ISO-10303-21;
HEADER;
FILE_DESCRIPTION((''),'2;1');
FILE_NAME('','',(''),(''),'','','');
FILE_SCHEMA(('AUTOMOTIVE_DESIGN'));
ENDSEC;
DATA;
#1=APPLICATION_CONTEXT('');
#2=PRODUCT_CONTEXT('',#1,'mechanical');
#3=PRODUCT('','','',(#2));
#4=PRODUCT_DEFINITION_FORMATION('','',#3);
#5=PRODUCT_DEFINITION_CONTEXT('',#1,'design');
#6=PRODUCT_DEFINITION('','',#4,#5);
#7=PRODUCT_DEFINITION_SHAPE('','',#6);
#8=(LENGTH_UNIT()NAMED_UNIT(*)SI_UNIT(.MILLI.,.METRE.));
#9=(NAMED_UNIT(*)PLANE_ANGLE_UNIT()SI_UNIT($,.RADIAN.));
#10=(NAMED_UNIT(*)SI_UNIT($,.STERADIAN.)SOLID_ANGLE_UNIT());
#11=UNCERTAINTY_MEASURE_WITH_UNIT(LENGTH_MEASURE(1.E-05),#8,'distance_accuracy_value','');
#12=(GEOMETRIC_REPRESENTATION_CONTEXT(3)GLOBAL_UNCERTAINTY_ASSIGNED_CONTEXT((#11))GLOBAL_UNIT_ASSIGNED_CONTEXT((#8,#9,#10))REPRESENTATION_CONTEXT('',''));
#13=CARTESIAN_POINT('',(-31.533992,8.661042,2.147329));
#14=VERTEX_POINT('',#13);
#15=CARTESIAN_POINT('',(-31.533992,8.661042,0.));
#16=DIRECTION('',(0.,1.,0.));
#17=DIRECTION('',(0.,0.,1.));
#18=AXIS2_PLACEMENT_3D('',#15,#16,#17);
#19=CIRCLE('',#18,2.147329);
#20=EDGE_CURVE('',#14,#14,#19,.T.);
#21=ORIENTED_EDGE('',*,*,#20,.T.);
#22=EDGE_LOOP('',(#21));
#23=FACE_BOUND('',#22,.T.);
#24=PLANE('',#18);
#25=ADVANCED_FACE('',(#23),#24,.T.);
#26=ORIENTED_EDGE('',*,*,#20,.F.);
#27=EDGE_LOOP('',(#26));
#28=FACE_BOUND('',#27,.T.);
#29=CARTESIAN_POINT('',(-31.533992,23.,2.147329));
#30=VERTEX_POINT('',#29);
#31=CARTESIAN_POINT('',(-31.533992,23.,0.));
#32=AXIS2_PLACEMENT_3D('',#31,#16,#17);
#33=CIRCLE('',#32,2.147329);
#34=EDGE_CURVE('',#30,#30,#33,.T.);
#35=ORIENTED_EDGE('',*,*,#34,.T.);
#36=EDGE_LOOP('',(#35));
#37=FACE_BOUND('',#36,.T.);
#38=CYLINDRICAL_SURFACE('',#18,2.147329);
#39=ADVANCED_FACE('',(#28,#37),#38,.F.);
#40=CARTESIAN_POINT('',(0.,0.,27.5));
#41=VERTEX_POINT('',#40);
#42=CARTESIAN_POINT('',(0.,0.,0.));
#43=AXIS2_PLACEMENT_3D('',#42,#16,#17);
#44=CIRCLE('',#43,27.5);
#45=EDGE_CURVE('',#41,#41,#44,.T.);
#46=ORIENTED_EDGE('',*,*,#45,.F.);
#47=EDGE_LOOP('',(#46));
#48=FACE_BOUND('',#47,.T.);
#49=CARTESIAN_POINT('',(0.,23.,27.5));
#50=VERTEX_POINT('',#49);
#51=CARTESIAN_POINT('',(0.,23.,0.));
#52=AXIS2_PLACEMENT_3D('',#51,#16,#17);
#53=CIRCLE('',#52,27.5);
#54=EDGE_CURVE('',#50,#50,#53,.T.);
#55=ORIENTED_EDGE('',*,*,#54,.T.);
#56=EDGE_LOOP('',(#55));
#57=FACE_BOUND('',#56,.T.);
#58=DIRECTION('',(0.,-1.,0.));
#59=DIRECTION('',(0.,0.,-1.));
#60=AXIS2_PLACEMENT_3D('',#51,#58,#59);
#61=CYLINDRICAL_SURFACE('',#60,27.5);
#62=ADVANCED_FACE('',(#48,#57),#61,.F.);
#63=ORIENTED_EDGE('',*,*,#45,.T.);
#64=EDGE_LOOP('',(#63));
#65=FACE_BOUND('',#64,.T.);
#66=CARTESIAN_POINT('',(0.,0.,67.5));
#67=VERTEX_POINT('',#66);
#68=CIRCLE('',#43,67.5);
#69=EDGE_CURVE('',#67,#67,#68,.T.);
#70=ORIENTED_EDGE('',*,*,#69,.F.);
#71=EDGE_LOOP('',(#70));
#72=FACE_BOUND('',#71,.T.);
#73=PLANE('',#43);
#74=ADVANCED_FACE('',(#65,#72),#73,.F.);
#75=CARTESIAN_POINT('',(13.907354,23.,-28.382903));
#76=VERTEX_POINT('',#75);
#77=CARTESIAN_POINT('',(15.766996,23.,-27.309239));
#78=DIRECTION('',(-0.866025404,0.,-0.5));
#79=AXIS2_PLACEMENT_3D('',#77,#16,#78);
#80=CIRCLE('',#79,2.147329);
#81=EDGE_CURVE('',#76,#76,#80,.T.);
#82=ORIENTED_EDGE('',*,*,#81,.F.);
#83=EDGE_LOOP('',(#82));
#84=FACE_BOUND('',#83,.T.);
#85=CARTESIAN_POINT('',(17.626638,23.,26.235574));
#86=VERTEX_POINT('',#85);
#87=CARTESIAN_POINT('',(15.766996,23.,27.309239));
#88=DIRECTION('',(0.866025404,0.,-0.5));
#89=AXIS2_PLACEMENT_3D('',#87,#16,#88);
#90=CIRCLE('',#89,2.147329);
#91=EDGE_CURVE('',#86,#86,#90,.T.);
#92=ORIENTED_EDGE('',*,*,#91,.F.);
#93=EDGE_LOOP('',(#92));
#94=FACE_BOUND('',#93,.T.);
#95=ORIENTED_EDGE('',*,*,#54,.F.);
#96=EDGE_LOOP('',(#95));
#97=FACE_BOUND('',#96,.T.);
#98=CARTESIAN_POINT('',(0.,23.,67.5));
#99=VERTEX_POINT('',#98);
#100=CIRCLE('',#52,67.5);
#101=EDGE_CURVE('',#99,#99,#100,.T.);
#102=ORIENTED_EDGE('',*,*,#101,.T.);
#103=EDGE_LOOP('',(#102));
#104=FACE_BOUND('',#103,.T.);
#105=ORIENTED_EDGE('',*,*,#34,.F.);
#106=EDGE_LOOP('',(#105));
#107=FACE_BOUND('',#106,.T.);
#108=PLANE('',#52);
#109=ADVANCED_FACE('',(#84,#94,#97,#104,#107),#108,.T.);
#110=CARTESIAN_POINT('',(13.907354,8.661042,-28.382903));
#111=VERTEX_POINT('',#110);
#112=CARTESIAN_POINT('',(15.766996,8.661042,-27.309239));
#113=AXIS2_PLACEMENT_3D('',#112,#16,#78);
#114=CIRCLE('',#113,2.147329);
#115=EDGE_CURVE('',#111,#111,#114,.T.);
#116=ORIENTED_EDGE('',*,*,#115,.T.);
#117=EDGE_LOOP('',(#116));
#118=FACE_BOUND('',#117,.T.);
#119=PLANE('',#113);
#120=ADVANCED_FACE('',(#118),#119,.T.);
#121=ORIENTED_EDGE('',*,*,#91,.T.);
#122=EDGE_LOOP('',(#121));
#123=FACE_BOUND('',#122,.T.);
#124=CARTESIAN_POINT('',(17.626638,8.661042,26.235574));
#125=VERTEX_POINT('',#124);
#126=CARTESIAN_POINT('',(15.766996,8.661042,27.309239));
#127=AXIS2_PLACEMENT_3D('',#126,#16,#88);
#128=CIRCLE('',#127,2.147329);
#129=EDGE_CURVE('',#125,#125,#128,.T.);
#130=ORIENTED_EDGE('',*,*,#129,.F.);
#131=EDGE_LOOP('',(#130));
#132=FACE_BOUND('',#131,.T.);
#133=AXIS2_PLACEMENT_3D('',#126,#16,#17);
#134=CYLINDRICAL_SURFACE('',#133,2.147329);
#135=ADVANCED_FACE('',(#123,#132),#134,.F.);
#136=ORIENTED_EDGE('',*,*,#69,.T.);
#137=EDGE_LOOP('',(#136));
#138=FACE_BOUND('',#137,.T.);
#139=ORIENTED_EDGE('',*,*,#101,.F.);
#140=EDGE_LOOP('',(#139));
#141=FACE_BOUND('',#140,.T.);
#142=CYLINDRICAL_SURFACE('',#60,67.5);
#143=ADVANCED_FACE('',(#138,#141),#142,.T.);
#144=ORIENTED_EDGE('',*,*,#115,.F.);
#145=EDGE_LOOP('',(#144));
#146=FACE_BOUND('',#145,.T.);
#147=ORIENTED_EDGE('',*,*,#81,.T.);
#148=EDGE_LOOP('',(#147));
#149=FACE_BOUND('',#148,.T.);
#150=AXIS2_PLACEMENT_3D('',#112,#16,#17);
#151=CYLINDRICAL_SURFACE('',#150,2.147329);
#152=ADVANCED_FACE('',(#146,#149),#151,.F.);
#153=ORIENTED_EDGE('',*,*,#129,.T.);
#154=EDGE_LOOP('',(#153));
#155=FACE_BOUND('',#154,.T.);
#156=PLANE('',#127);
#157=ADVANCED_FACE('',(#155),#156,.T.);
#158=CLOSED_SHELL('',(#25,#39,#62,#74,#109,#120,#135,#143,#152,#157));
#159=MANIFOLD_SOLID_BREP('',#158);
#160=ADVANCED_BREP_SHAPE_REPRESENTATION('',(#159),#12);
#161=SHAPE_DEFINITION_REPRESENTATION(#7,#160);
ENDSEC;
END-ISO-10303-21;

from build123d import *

# Parameters (mm, degrees)
SKETCH1_R           = 67.5
BOSS_EXTRUDE1_DEPTH = 23
SKETCH2_R           = 27.5
CUT_EXTRUDE1_DEPTH  = 99.19114013
SKETCH3_R           = 2.147329469
CUT_EXTRUDE2_DEPTH  = 14.338957893
CIRPATTERN1_COUNT   = 3


with BuildPart() as part:
    # Sketch1 → Boss-Extrude1 (new body)
    with BuildSketch(Plane(origin=(0, 0, 0), x_dir=(1, 0, 0), z_dir=(0, 1, 0))):
        Circle(SKETCH1_R)
    extrude(amount=BOSS_EXTRUDE1_DEPTH)

    # Sketch2 → Cut-Extrude1 (cut, through all)
    with BuildSketch(Plane(origin=(0, 0, 0), x_dir=(1, 0, 0), z_dir=(0, 1, 0))):
        Circle(SKETCH2_R)
    extrude(amount=CUT_EXTRUDE1_DEPTH, mode=Mode.SUBTRACT)

    # Sketch3 → Cut-Extrude2 (cut)
    with BuildSketch(Plane(origin=(0, 23, 0), x_dir=(1, 0, 0), z_dir=(0, 1, 0))):
        with Locations((-31.533992457, 0)):
            Circle(SKETCH3_R)
    cut_extrude2 = extrude(amount=-CUT_EXTRUDE2_DEPTH, mode=Mode.SUBTRACT)

    # CirPattern1: Cut-Extrude2 ×3 about axis
    cirpattern1_axis = Axis((0, 0, 0), (0, 1, 0))
    for i in range(1, CIRPATTERN1_COUNT):
        add(cut_extrude2.rotate(cirpattern1_axis, i * 360 / CIRPATTERN1_COUNT), mode=Mode.SUBTRACT)


solid = part.part
